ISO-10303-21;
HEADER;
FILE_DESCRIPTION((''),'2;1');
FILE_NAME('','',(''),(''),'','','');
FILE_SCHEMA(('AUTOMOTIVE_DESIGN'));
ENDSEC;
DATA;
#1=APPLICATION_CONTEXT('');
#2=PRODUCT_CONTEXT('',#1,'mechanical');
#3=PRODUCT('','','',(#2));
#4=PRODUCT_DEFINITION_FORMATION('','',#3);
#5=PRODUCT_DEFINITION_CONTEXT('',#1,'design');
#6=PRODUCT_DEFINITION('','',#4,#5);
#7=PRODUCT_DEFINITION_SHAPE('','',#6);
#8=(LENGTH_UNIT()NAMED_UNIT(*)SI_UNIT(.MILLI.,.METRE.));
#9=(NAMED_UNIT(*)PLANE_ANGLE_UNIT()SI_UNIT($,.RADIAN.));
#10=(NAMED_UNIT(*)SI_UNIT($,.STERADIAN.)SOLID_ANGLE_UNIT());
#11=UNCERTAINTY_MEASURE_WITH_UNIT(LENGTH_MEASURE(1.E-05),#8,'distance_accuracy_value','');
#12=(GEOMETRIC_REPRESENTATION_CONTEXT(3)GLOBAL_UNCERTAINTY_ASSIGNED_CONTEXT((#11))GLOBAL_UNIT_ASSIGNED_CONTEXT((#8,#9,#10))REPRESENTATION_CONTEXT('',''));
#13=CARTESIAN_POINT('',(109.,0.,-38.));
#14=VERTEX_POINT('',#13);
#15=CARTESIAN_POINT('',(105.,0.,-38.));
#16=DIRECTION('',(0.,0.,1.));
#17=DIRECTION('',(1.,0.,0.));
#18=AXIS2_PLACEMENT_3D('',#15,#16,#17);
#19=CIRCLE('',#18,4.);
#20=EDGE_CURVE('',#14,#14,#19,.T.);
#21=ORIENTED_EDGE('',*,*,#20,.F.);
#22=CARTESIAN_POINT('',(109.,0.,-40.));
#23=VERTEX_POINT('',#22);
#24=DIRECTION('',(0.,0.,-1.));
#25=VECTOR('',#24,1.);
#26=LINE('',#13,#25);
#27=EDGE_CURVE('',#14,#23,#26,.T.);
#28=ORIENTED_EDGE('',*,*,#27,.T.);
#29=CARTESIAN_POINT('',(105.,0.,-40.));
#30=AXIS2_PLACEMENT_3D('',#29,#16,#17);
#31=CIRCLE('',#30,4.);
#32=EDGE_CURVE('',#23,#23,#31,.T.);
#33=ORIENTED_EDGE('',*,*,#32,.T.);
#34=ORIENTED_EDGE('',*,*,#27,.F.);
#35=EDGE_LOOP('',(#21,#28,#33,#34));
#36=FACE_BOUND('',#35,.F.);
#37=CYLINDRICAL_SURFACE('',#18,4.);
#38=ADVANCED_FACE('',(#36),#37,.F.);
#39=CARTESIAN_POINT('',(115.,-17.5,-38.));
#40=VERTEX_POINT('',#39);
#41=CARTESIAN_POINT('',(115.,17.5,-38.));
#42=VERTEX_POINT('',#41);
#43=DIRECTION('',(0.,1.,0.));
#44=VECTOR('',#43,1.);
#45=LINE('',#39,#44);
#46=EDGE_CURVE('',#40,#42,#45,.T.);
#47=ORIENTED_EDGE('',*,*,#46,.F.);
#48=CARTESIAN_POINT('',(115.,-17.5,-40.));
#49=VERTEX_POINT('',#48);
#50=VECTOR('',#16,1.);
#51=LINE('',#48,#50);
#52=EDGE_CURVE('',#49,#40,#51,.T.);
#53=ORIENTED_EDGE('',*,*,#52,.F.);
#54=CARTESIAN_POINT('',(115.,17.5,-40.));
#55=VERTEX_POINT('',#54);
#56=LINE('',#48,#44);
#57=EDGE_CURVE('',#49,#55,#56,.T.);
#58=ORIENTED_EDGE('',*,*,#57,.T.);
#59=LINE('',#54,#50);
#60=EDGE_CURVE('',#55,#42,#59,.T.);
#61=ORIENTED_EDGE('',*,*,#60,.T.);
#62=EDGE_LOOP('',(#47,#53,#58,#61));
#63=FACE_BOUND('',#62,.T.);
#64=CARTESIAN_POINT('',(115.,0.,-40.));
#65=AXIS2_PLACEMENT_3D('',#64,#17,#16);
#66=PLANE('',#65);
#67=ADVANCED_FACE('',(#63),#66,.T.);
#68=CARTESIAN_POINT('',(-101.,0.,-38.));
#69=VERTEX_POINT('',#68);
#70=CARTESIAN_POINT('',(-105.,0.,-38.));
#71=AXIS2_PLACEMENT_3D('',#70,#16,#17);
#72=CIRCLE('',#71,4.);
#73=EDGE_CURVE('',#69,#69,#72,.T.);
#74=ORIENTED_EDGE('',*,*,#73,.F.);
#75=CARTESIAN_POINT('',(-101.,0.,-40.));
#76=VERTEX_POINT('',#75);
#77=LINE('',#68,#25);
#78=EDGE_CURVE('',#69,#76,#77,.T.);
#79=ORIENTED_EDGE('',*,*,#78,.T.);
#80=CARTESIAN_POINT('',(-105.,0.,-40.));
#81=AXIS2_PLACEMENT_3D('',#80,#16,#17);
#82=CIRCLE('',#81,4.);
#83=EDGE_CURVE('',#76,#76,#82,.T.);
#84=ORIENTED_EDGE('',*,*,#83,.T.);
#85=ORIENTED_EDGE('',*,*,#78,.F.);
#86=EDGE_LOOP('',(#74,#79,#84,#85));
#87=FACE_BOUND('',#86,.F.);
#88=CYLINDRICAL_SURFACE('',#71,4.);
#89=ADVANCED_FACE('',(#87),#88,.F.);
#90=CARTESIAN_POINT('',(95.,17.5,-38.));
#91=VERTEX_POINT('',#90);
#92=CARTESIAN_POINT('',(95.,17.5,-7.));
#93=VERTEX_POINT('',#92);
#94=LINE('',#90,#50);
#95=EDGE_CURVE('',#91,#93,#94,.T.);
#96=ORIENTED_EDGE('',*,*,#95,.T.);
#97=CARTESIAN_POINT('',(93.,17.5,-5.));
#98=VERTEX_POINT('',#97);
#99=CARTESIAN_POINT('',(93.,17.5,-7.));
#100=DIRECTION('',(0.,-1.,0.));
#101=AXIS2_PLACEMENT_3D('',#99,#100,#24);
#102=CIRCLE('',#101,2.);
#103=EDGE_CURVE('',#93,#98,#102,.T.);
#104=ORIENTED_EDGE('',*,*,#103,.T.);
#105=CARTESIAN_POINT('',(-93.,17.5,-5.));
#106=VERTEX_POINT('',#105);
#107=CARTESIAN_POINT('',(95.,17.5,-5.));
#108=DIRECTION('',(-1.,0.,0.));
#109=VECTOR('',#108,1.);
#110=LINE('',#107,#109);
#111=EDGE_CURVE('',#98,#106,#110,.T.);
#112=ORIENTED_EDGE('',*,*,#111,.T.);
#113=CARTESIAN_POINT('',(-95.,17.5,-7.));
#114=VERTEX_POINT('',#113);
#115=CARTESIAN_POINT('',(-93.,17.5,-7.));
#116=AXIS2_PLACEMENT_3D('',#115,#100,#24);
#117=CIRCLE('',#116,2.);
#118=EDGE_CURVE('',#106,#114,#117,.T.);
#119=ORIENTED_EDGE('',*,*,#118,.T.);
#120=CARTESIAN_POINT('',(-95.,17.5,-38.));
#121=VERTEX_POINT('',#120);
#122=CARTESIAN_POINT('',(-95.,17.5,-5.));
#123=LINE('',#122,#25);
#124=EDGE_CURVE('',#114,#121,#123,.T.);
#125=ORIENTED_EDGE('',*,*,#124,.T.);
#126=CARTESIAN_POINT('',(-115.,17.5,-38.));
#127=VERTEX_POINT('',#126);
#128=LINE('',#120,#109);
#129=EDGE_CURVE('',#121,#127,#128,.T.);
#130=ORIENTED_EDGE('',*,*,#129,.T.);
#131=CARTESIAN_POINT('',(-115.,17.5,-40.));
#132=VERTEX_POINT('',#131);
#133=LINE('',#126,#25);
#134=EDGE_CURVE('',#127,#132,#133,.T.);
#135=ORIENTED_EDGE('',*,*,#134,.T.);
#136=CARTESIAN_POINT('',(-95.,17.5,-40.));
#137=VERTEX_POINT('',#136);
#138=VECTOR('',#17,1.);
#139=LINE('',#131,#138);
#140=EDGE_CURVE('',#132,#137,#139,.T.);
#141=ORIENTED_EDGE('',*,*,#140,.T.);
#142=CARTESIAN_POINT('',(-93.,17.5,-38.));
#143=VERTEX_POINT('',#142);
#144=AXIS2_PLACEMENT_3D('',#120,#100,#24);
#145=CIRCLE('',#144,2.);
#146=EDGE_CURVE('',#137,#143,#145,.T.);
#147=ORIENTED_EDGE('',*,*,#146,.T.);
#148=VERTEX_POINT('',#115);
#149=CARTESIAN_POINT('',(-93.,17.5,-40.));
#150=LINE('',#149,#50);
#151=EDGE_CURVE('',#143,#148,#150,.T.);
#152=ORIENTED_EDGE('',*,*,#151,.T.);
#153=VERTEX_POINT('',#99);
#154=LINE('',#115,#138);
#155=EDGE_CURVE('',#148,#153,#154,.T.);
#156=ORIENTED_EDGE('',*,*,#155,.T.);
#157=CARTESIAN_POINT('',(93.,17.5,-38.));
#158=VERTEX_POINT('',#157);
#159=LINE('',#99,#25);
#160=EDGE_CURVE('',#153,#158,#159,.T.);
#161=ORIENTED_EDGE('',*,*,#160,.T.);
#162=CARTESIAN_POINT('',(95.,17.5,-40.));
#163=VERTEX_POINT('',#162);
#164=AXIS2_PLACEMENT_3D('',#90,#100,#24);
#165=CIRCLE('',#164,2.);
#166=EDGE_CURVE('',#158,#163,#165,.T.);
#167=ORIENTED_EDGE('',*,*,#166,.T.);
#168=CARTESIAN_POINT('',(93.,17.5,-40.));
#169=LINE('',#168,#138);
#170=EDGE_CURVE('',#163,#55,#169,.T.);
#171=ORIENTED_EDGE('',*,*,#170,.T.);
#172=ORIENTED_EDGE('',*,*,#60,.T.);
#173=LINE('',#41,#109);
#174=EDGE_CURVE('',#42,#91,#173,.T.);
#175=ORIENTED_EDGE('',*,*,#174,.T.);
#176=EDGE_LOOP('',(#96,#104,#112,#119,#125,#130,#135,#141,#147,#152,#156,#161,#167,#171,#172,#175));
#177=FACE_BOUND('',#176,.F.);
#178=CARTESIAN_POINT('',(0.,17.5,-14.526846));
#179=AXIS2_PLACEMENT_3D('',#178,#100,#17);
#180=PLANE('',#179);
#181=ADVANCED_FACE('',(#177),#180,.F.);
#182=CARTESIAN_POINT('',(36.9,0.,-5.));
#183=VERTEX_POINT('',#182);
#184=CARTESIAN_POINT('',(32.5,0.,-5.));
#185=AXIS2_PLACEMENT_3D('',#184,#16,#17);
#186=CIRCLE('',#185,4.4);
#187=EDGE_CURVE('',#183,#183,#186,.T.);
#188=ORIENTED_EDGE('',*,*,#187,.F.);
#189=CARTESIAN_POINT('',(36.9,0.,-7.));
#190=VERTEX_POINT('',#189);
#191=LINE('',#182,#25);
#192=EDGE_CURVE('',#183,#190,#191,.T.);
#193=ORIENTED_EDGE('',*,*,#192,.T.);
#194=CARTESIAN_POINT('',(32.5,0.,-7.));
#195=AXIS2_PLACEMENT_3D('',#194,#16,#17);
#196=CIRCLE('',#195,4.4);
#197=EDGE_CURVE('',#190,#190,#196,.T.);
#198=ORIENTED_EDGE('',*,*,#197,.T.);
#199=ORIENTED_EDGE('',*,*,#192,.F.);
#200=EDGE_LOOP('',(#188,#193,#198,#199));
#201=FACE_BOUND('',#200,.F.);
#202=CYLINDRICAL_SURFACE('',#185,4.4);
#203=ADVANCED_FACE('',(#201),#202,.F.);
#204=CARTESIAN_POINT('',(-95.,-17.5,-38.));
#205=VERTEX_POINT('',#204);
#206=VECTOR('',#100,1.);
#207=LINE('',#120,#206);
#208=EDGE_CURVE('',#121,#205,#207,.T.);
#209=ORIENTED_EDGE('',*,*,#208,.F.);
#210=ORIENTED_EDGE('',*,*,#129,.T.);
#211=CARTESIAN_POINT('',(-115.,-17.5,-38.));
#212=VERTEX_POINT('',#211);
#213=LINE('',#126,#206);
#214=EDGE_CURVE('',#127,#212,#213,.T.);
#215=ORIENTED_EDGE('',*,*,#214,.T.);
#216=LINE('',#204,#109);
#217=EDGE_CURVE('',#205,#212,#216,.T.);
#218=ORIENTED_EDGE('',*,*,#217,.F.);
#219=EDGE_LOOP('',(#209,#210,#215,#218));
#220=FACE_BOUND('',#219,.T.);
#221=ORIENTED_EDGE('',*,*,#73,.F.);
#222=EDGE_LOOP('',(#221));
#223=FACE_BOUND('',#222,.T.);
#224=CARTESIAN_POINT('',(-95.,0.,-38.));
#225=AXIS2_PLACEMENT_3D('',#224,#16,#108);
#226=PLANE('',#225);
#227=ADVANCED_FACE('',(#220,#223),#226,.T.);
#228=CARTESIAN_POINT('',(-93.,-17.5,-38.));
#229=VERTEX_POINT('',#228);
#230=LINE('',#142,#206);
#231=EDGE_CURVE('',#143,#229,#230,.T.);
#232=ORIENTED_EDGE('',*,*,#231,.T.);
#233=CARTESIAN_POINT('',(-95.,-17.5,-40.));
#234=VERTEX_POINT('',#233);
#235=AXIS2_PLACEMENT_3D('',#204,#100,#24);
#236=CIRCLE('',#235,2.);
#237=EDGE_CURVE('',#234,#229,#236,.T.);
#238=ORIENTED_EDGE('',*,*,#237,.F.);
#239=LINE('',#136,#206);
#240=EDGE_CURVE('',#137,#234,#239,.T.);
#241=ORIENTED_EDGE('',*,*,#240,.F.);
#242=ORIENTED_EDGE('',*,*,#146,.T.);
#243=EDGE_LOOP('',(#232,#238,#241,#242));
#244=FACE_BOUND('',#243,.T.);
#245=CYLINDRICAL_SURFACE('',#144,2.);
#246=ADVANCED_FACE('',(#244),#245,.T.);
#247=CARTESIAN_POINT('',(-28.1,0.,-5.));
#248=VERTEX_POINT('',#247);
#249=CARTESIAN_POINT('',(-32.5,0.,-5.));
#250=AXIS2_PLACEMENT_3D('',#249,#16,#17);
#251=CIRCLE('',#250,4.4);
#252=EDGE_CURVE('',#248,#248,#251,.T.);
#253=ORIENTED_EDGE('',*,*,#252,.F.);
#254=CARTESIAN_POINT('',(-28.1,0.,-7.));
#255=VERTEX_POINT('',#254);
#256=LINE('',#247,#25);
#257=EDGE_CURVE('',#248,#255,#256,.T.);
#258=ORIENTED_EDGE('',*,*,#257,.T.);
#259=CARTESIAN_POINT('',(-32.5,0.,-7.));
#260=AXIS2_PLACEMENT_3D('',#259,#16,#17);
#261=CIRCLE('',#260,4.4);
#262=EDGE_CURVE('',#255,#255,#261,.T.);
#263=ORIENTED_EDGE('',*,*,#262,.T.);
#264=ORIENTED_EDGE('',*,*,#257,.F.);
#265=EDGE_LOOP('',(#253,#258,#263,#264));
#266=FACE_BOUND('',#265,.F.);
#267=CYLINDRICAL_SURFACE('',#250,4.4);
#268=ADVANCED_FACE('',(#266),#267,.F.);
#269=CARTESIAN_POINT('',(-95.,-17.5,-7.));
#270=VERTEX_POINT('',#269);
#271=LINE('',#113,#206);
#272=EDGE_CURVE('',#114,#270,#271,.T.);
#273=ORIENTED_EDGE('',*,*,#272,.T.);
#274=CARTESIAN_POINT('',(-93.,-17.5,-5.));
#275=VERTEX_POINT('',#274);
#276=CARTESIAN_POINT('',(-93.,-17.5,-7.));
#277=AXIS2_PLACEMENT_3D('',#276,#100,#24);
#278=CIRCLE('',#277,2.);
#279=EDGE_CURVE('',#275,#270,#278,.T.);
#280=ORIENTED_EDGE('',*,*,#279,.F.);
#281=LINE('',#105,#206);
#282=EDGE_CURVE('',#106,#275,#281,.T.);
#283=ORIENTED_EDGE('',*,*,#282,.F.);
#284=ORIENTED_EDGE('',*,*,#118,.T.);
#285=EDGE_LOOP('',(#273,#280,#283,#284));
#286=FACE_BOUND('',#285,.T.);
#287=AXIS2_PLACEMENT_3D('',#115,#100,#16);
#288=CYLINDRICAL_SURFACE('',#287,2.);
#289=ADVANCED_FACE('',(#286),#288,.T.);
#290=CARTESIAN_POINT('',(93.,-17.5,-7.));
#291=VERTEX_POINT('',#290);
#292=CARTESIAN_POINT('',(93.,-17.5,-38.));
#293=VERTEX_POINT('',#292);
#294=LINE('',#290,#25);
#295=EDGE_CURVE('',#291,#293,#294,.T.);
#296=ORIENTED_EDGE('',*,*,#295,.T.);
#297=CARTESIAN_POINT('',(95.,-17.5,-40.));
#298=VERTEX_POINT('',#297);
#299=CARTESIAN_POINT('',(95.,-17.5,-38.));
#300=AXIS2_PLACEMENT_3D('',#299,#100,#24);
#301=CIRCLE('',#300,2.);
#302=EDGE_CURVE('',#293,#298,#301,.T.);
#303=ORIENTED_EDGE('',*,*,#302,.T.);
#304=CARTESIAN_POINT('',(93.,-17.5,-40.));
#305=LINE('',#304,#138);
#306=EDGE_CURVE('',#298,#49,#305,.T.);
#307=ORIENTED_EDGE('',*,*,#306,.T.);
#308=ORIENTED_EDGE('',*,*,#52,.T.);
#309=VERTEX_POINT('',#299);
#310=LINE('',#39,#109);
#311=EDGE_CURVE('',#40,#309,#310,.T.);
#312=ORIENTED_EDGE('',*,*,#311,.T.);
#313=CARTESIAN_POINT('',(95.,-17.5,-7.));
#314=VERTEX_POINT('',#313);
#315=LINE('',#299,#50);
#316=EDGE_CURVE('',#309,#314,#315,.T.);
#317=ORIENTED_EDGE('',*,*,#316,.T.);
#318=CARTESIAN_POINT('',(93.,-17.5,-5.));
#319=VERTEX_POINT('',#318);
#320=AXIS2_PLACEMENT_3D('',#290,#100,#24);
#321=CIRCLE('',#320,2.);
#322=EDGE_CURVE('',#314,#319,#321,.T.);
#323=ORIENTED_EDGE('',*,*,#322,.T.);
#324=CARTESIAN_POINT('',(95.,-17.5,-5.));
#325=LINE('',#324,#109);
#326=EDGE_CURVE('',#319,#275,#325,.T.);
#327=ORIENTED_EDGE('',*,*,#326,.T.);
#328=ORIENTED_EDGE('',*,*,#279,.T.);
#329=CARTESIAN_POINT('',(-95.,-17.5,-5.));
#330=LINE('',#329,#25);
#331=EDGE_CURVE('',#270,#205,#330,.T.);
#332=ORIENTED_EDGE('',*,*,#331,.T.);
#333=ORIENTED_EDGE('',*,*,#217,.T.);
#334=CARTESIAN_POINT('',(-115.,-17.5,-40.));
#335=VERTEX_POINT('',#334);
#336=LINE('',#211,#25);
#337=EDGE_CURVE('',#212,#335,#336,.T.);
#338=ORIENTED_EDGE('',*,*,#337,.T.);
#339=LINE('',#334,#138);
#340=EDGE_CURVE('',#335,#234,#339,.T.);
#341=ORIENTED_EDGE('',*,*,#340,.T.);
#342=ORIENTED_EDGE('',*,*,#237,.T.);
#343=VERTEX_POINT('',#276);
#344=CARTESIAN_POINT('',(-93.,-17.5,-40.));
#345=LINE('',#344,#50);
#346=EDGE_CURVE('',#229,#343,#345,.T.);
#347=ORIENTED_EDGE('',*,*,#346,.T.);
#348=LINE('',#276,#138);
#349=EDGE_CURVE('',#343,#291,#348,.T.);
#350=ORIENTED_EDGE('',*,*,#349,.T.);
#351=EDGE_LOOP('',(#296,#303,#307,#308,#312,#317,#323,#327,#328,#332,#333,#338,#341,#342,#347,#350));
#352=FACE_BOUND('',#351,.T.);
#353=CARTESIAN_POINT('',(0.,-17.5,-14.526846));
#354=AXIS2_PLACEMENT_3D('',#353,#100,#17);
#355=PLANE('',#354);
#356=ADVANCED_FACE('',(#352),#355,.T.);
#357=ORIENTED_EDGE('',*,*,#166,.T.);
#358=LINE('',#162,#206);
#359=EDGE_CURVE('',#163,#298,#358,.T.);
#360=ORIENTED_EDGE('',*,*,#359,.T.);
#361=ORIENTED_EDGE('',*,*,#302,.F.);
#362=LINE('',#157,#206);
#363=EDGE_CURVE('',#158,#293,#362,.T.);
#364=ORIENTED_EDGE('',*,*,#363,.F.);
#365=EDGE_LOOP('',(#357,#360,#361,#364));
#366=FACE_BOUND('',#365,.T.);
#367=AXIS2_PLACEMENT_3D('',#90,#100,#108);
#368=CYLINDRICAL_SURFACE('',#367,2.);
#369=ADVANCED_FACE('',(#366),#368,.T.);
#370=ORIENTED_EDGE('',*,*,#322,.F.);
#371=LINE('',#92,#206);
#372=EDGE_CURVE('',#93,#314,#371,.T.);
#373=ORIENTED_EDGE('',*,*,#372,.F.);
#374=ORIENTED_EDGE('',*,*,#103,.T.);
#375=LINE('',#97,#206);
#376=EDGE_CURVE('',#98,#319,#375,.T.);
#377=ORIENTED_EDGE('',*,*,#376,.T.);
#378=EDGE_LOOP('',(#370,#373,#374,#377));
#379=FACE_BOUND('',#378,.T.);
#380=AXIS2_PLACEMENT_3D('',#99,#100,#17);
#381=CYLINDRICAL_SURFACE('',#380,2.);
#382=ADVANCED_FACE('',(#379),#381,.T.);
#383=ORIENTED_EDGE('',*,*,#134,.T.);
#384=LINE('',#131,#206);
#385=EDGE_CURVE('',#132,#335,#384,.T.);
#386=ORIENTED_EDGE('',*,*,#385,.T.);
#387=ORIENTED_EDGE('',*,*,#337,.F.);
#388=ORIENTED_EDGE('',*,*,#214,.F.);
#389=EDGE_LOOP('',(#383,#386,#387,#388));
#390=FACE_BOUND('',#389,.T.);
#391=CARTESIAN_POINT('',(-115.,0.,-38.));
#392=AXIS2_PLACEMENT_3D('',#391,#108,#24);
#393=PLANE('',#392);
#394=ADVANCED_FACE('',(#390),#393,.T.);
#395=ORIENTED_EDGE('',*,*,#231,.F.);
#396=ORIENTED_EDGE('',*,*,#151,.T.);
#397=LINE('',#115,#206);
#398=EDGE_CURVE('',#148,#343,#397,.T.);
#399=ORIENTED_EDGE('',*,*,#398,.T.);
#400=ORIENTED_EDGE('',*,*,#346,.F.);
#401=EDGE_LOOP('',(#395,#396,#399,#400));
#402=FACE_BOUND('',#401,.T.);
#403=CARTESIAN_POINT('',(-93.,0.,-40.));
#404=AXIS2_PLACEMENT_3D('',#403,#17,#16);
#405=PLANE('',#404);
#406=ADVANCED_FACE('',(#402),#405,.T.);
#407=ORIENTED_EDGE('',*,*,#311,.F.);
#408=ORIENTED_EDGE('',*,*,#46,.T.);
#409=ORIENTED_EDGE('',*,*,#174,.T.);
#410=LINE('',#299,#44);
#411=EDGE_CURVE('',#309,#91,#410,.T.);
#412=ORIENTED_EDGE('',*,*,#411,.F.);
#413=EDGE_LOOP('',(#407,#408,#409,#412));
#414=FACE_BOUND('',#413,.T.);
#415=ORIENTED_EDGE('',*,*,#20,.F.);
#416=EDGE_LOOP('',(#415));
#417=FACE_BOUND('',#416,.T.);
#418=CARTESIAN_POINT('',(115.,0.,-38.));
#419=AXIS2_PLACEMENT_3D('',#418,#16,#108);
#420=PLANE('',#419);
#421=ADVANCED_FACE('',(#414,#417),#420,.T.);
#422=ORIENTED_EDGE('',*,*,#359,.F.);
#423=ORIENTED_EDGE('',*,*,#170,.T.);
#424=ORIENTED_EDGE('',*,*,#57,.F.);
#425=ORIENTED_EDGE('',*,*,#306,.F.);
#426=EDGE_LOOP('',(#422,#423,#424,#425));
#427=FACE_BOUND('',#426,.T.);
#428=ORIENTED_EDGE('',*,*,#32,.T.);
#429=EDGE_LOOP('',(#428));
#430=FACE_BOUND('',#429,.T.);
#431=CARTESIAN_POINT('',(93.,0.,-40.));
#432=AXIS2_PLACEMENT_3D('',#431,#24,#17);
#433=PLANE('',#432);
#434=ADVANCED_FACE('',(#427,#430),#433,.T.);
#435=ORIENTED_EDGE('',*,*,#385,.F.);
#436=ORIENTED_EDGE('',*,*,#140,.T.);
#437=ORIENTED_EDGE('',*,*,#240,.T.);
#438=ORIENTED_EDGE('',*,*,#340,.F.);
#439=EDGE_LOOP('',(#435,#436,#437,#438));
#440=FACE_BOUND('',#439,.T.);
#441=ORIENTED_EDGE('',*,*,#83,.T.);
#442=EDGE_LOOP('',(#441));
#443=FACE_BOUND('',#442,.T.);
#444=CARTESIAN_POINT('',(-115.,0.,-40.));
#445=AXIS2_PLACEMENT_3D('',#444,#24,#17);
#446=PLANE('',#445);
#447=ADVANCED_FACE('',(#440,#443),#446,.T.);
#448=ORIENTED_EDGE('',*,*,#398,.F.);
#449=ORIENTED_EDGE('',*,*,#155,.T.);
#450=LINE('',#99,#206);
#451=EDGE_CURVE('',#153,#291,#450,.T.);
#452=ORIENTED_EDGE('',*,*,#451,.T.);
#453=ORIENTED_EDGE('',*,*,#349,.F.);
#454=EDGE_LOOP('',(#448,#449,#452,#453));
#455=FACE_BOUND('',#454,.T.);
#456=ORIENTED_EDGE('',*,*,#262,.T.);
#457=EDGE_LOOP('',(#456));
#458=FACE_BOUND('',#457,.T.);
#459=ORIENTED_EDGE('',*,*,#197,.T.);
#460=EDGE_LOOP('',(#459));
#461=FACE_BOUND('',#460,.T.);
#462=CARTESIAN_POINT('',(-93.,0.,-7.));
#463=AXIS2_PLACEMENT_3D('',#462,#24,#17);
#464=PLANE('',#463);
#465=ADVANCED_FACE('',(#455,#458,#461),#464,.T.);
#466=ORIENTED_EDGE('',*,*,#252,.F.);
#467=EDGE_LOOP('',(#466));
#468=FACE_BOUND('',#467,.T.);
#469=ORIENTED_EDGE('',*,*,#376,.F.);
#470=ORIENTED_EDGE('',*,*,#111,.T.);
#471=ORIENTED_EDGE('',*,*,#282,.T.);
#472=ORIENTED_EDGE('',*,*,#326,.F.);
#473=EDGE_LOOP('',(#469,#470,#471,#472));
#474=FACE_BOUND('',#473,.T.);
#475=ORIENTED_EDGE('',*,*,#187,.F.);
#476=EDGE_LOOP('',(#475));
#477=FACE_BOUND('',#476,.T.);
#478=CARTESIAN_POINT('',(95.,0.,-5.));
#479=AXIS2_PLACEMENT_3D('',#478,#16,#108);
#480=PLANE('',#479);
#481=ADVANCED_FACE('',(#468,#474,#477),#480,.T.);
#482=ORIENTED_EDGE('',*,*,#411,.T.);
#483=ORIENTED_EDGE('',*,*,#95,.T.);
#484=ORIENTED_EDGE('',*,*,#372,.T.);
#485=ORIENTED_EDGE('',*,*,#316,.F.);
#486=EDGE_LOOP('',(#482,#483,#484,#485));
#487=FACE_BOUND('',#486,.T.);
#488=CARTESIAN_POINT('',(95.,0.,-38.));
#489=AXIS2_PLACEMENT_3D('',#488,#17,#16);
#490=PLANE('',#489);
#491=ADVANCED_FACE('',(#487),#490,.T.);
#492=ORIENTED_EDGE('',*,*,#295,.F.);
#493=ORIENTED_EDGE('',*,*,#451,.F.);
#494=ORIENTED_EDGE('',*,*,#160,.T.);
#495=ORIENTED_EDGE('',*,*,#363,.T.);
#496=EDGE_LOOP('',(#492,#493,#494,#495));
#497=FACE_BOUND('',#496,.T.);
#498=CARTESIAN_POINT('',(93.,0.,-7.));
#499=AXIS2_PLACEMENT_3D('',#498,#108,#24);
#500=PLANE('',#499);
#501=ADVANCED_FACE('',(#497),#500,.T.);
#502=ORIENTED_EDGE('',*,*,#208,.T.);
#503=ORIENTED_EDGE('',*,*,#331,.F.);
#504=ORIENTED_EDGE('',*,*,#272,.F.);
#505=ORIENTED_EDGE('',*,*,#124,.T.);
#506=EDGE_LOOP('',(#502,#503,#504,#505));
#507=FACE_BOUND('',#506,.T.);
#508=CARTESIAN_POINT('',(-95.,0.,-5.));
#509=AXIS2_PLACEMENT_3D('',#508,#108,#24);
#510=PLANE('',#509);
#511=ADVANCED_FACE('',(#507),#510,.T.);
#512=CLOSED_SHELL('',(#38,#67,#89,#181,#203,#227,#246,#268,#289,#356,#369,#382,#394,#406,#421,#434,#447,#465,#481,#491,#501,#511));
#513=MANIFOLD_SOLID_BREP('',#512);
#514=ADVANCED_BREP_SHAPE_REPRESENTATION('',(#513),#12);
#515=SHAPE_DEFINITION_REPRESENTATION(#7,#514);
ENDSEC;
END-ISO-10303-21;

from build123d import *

# Parameters (mm, degrees)
F1_DEPTH = 17.5
F2_R     = 4
F3_DEPTH = 25
F4_R     = 4.4
F5_DEPTH = 25
F6_R     = 2


# Not quite as in the source:
# - a feature names something its author has since deleted; it is built from what else it names


with BuildPart() as f1:
    # F0 (on Front) → F1 (new body, symmetric)
    with BuildSketch(Plane.XZ):
        Polygon((95, -38), (95, -5), (-95, -5), (-95, -38), (-115, -38), (-115, -40), (-93, -40), (-93, -7), (93, -7), (93, -40), (115, -40), (115, -38), align=None)
    extrude(amount=F1_DEPTH, both=True)

    # F2 (on face) → F3 (cut)
    with BuildSketch(Plane.XY.offset(-38)):
        with Locations((-105, 0)):
            Circle(F2_R)
        with Locations((105, 0)):
            Circle(F2_R)
    extrude(amount=-F3_DEPTH, mode=Mode.SUBTRACT)

    # F4 (on face) → F5 (cut)
    with BuildSketch(Plane.XY.offset(-5)):
        with Locations((-32.5, 0)):
            Circle(F4_R)
        with Locations((32.5, 0)):
            Circle(F4_R)
    extrude(amount=-F5_DEPTH, mode=Mode.SUBTRACT)

    # F6
    f6_edges = [f1.edges().sort_by_distance(p)[0] for p in [
        (95, 0, -5),
        (-95, 0, -5),
        (-93, 0, -40),
        (93, 0, -40),
    ]]
    fillet(f6_edges, radius=F6_R)


solid = f1.part
